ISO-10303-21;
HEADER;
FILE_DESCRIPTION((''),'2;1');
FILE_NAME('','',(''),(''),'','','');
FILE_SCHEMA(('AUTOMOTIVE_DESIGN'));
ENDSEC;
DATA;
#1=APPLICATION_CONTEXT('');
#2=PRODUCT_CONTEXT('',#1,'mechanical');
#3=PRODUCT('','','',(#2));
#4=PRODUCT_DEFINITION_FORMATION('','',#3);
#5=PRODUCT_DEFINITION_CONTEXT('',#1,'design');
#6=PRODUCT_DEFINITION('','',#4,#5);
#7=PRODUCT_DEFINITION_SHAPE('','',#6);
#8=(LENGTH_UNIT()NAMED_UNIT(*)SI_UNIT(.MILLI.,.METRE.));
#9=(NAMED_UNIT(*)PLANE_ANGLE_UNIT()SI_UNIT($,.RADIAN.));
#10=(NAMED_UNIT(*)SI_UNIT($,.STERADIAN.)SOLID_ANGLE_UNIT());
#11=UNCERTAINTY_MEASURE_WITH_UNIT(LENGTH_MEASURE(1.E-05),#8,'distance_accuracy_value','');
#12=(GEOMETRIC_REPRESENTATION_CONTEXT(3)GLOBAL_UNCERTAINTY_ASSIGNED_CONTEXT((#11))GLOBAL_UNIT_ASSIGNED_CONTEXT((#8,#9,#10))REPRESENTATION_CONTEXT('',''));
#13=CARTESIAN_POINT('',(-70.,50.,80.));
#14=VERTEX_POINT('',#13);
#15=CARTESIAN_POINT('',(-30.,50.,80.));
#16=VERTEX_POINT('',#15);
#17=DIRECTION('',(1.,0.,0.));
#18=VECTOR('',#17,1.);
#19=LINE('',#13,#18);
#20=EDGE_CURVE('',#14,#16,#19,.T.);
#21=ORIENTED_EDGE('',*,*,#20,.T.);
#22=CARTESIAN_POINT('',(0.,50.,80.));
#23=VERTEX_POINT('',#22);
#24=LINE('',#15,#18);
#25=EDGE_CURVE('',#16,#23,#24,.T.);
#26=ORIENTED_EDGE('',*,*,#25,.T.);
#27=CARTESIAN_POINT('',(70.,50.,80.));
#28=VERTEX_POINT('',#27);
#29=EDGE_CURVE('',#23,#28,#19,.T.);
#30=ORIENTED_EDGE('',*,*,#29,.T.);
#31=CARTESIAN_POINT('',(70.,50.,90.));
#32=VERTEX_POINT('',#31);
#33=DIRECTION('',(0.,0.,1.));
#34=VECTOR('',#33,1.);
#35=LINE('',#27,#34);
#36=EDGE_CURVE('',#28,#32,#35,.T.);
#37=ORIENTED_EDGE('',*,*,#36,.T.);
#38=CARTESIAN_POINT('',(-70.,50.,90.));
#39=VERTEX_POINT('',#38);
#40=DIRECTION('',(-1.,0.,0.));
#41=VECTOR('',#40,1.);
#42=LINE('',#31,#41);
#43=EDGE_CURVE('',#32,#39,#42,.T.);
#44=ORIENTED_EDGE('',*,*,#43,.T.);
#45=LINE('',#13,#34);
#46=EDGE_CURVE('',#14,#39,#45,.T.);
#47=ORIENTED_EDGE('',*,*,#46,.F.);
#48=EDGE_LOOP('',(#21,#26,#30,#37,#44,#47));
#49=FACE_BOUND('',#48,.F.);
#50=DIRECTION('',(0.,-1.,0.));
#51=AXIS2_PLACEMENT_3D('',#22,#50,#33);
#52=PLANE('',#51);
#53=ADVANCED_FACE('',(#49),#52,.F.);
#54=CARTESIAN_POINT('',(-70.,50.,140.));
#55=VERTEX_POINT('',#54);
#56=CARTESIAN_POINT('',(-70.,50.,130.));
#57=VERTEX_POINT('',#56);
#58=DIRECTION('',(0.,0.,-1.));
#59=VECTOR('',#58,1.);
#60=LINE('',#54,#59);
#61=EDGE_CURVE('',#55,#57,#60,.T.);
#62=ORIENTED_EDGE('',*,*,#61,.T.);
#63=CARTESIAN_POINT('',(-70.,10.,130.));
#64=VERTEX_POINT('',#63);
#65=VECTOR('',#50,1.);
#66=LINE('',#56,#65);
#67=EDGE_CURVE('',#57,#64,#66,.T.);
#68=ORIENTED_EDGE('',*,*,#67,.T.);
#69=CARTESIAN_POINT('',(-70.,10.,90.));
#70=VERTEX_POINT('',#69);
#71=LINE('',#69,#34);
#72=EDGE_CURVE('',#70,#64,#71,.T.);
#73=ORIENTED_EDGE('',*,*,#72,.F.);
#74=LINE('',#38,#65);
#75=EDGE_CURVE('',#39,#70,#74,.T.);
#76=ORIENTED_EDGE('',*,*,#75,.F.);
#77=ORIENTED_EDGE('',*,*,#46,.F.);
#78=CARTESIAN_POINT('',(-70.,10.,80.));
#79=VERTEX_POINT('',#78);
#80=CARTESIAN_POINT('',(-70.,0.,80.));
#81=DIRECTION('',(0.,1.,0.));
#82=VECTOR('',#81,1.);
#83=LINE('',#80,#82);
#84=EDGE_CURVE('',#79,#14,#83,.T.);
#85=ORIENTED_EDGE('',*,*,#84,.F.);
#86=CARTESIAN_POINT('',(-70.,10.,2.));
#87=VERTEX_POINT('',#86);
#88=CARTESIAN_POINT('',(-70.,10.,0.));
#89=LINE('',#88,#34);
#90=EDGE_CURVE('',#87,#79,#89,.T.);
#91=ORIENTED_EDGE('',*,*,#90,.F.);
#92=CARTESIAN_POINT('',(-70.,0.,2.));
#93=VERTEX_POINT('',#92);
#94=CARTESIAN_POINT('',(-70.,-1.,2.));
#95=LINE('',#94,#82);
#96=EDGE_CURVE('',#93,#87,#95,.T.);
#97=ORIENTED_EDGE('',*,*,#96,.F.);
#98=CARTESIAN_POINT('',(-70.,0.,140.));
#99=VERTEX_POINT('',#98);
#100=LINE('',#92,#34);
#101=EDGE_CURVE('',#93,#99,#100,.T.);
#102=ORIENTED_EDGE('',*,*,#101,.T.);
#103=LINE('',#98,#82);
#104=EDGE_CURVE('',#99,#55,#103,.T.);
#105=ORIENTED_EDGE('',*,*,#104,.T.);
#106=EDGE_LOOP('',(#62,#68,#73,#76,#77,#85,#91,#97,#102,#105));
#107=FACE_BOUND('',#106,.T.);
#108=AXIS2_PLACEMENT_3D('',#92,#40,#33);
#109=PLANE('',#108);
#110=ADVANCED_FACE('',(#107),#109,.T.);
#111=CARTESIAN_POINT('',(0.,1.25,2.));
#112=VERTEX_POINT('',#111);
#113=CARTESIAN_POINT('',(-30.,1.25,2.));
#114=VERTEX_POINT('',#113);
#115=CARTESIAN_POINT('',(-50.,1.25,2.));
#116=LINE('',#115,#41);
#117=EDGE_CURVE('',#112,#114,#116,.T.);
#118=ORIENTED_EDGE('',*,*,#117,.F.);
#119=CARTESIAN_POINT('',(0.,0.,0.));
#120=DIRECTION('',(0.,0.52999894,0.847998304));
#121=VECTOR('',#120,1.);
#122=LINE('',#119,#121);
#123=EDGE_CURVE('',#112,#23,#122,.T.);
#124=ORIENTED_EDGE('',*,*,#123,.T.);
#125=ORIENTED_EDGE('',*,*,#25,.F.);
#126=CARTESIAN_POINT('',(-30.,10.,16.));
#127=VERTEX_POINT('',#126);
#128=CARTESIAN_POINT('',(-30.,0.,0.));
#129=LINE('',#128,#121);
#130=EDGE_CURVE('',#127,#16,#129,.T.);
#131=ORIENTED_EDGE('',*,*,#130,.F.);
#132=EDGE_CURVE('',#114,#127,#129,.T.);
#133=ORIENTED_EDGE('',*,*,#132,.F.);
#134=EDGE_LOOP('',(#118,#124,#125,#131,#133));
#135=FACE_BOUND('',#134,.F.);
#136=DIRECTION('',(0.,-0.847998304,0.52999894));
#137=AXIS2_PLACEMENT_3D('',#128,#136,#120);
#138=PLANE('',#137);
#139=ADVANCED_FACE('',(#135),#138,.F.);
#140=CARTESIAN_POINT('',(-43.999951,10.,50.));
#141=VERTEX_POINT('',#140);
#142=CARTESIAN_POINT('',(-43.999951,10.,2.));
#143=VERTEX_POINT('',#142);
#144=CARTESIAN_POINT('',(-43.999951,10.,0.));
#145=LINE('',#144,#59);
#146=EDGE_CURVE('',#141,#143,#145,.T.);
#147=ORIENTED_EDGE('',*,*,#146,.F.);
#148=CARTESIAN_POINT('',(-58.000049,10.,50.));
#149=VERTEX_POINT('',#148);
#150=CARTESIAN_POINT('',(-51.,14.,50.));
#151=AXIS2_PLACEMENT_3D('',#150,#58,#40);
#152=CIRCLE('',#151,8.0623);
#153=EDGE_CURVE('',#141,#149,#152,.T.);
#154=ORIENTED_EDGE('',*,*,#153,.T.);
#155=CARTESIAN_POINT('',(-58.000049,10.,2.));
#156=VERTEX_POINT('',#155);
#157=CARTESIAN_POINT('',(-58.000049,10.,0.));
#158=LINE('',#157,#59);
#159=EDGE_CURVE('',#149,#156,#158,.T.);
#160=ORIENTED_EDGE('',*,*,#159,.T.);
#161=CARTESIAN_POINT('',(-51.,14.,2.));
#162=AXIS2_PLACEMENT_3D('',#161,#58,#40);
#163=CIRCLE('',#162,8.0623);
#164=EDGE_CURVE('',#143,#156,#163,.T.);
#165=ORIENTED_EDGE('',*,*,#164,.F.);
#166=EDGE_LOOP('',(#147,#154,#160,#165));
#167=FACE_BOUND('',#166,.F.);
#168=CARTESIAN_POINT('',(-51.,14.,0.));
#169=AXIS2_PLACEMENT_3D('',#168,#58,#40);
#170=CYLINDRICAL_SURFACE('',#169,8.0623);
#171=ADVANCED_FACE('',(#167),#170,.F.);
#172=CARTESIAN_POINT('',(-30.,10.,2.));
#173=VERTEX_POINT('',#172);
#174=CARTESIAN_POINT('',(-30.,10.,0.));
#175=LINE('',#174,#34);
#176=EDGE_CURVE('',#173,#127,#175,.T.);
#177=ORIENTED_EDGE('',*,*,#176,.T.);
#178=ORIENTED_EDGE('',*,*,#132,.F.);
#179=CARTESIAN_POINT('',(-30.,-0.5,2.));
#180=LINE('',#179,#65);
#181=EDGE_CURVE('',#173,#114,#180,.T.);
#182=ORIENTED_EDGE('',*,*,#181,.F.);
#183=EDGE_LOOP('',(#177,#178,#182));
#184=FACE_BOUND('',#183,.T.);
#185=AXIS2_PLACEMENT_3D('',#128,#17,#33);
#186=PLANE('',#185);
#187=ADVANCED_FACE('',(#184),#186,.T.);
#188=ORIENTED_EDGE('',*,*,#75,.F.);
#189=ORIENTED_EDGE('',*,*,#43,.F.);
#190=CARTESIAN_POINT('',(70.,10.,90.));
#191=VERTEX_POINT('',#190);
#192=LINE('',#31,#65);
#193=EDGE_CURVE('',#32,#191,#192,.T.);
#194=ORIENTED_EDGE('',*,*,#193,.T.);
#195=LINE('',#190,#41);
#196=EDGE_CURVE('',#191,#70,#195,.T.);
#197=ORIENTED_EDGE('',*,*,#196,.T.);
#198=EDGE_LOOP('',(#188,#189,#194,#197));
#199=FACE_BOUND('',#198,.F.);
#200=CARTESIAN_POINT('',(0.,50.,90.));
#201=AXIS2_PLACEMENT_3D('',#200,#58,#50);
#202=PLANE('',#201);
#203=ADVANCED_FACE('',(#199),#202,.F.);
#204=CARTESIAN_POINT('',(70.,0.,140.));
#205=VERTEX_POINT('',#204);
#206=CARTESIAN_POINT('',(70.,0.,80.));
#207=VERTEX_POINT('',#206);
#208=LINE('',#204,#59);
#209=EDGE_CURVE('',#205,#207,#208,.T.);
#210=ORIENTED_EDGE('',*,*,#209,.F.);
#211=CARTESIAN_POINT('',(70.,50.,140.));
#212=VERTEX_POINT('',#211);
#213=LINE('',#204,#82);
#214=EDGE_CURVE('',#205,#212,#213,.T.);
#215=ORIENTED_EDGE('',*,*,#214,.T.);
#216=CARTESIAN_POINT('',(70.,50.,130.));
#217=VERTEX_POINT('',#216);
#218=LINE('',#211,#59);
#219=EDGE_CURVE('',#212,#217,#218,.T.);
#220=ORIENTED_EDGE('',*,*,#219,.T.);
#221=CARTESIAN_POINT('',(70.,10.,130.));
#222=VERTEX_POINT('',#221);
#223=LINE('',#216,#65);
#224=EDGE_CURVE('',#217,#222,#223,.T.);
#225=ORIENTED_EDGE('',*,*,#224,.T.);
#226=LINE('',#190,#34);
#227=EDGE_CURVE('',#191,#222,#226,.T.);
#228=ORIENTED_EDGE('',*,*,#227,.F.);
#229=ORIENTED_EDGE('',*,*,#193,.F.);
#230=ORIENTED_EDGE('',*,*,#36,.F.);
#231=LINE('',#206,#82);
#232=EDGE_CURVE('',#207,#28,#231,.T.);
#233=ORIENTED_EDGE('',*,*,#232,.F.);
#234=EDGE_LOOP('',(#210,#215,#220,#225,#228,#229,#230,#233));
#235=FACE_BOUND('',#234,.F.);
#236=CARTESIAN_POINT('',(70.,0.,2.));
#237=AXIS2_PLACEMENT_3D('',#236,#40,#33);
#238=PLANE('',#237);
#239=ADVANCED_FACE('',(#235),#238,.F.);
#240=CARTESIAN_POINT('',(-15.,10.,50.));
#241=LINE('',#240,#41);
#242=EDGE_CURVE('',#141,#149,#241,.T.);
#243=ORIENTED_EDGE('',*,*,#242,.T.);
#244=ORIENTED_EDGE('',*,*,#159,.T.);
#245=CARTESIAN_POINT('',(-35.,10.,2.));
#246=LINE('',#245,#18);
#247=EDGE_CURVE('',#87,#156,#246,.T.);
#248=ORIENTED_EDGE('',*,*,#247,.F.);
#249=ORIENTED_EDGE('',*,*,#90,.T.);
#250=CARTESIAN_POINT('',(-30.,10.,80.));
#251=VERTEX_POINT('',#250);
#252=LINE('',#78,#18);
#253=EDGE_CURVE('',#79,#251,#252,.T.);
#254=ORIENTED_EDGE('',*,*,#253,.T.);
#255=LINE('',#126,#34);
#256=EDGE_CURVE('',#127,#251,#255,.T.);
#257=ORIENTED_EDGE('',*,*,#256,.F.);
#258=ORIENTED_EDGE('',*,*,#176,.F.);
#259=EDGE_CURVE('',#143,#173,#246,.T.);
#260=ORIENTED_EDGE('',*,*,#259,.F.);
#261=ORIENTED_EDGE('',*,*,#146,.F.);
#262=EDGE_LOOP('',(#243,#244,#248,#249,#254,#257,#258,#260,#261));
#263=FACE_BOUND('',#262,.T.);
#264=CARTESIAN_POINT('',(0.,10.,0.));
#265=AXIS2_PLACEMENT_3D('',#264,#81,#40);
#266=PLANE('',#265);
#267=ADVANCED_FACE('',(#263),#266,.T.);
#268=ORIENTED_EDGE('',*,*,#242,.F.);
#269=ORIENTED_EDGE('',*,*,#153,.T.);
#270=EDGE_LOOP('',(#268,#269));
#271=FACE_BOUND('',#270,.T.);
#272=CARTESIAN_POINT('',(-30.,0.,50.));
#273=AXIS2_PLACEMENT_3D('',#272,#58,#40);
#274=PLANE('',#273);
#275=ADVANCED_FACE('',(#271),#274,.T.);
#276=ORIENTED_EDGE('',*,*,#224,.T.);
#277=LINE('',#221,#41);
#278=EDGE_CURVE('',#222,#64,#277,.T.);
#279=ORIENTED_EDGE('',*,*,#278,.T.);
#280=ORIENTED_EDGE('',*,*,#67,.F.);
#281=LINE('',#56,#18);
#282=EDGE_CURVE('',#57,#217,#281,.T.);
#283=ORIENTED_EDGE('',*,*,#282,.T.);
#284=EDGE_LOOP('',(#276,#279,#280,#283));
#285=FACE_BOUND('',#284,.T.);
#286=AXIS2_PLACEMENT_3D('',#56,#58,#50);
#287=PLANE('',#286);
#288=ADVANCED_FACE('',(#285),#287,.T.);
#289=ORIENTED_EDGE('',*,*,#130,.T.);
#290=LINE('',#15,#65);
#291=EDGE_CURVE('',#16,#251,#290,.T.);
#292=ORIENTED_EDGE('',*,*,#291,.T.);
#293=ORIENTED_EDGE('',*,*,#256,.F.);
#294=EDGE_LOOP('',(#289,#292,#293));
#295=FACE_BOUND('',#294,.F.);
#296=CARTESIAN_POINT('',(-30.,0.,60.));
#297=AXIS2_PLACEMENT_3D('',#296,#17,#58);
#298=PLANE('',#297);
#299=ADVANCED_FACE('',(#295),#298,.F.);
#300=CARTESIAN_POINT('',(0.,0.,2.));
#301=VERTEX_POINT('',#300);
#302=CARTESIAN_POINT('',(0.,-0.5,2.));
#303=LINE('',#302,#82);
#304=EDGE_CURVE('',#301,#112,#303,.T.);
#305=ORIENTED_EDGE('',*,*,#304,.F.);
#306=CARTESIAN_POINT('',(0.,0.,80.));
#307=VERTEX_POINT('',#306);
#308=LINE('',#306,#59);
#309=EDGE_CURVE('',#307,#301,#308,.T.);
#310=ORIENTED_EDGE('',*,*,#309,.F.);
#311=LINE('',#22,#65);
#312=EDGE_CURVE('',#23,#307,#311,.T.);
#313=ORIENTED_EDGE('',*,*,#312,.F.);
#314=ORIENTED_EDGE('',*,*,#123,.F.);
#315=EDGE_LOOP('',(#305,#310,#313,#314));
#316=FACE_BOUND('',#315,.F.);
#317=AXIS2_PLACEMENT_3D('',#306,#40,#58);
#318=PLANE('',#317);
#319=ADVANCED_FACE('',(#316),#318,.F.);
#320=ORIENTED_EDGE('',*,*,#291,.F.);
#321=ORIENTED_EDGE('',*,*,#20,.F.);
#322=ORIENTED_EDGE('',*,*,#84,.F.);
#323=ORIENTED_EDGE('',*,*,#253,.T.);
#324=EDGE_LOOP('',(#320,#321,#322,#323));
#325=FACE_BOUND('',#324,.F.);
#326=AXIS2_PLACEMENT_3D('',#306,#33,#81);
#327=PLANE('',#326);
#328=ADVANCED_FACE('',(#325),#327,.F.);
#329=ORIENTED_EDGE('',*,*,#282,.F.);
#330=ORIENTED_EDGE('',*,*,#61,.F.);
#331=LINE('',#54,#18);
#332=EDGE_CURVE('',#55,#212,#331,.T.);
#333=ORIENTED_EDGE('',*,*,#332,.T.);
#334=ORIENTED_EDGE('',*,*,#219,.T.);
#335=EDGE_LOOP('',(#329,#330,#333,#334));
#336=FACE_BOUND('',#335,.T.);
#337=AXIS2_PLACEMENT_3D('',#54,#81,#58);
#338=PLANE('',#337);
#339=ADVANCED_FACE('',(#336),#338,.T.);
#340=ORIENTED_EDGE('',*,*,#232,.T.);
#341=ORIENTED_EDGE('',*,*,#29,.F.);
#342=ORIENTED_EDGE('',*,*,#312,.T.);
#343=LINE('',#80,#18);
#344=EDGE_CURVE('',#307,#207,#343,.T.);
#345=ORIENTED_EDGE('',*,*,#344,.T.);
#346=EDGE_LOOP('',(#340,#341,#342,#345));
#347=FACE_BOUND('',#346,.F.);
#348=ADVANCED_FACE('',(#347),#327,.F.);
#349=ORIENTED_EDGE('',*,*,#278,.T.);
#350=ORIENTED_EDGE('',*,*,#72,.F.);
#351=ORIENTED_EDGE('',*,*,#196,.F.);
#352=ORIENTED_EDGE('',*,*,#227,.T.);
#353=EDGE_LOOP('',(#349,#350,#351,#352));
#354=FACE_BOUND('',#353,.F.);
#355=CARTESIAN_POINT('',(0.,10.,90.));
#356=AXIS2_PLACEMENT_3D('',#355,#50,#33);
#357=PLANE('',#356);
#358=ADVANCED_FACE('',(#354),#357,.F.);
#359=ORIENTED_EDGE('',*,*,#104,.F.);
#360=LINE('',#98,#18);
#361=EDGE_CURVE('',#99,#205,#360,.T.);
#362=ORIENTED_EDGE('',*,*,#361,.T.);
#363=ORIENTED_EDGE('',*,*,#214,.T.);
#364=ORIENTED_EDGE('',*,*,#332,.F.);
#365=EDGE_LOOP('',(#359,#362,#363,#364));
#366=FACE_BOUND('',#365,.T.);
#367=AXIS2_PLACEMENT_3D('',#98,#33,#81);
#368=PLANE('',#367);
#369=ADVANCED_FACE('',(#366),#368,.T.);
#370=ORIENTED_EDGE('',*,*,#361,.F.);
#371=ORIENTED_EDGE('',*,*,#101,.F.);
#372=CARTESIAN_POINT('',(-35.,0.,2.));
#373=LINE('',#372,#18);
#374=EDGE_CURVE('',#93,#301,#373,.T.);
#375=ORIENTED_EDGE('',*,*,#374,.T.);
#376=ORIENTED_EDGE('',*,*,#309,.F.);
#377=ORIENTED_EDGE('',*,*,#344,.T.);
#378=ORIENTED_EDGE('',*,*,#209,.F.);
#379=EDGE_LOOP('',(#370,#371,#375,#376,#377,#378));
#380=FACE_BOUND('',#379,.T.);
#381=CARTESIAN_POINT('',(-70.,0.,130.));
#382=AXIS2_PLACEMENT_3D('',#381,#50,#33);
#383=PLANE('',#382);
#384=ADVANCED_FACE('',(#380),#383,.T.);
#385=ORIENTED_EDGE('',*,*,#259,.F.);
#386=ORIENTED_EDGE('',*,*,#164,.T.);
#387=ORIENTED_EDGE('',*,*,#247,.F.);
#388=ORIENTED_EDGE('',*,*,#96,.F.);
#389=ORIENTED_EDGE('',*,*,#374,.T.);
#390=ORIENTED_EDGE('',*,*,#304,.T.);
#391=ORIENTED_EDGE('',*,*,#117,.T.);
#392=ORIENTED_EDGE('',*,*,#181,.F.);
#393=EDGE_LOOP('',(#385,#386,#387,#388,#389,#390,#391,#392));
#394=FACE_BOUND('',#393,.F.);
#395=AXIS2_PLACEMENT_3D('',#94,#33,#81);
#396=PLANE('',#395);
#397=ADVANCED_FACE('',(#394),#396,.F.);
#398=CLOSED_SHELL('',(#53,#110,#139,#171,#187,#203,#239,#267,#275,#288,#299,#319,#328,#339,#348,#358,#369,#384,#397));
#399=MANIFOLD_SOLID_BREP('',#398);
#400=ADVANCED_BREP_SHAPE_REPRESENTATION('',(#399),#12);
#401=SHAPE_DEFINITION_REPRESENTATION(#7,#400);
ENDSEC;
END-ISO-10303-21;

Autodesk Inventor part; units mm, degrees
ref_plane "YZ Plane" through (0, 0, 0) normal (1, 0, 0) x (0, 1, 0)
ref_plane "XZ Plane" through (0, 0, 0) normal (0, 1, 0) x (-1, 0, 0)
ref_plane "XY Plane" through (0, 0, 0) normal (0, 0, 1) x (1, 0, 0)
sketch "Sketch1" plane through (0, 0, 0) normal (0, 1, 0) x (-1, 0, 0)
  line L0 (70, 80) -> (0, 80)
  line L1 (0, 80) -> (0, 0)
  line L2 (0, 0) -> (70, 0)
  line L3 (70, 0) -> (70, 80)
  line L4 (0, 0) -> (30, 0)
  line L5 (30, 0) -> (30, 60)
  line L6 (30, 60) -> (0, 60)
  line L7 (0, 60) -> (0, 0)
  point P0 (0, 60)
  dimension "d0" = 80
  dimension "d1" = 70
  dimension "d2" = 30
  dimension "d3" = 60
extrude "Extrusion1" add sketch "Sketch1" along normal blind 10 contours L3 L2 L5 L6 L1 L0
sketch "Sketch2" plane through (0, 0, 80) normal (1, 0, 0) x (0, 0, -1)
  line L0 (0, 0) -> (20, 0) construction
  line L1 (0, 10) -> (20, 10) construction
  line L2 (0, 0) -> (0, 10) construction
  line L3 (-50, 0) -> (0, 0)
  line L4 (0, 0) -> (0, 50)
  line L5 (0, 50) -> (-10, 50)
  line L6 (-10, 50) -> (-10, 10)
  line L7 (-10, 10) -> (-50, 10)
  line L8 (-50, 10) -> (-50, 0)
  point P0 (80, 0)
  dimension "d6" = 50
  dimension "d7" = 50
  dimension "d8" = 40
  dimension "d9" = 40
extrude "Extrusion2" add sketch "Sketch2" along normal mid plane 140
sketch "Sketch4" plane through (-30, 0, 0) normal (0, 0, -1) x (-1, 0, 0)
  circle A0 centre (21, 14) radius 8.0623
  point P0 (-30, 0)
extrude "Extrusion3" cut sketch "Sketch4" against normal blind 50
sketch "Sketch6" plane through (-30, 0, 60) normal (1, 0, 0) x (0, 0, -1)
  line L0 (-20, 50) -> (-20, 10) construction
  line L1 (60, 0) -> (-20, 50)
  line L2 (-20, 50) -> (-20, 0)
  line L3 (-20, 0) -> (60, 0)
extrude "Extrusion4" add sketch "Sketch6" along normal blind 30
sketch "Sketch7" plane through (-70, 0, 0) normal (-1, 0, 0) x (0, 0, 1)
  line L0 (2, 52) -> (-22, 52)
  line L1 (-22, 52) -> (-22, -1)
  line L2 (-22, -1) -> (2, -1)
  line L3 (2, -1) -> (2, 52)
extrude "Extrusion5" cut sketch "Sketch7" against normal blind 1000
sketch "Sketch8" plane through (-70, 0, 2) normal (-1, 0, 0) x (0, 0, 1)
  line L0 (128, 0) -> (138, 0)
  line L1 (138, 0) -> (138, 50)
  line L2 (138, 50) -> (128, 50)
  line L3 (128, 50) -> (128, 0)
  point P0 (-2, 0)
  dimension "d18" = 10
extrude "Extrusion6" add sketch "Sketch8" against normal up to surface (140 mm away)
properties part number "GiroMotorKrepl"
